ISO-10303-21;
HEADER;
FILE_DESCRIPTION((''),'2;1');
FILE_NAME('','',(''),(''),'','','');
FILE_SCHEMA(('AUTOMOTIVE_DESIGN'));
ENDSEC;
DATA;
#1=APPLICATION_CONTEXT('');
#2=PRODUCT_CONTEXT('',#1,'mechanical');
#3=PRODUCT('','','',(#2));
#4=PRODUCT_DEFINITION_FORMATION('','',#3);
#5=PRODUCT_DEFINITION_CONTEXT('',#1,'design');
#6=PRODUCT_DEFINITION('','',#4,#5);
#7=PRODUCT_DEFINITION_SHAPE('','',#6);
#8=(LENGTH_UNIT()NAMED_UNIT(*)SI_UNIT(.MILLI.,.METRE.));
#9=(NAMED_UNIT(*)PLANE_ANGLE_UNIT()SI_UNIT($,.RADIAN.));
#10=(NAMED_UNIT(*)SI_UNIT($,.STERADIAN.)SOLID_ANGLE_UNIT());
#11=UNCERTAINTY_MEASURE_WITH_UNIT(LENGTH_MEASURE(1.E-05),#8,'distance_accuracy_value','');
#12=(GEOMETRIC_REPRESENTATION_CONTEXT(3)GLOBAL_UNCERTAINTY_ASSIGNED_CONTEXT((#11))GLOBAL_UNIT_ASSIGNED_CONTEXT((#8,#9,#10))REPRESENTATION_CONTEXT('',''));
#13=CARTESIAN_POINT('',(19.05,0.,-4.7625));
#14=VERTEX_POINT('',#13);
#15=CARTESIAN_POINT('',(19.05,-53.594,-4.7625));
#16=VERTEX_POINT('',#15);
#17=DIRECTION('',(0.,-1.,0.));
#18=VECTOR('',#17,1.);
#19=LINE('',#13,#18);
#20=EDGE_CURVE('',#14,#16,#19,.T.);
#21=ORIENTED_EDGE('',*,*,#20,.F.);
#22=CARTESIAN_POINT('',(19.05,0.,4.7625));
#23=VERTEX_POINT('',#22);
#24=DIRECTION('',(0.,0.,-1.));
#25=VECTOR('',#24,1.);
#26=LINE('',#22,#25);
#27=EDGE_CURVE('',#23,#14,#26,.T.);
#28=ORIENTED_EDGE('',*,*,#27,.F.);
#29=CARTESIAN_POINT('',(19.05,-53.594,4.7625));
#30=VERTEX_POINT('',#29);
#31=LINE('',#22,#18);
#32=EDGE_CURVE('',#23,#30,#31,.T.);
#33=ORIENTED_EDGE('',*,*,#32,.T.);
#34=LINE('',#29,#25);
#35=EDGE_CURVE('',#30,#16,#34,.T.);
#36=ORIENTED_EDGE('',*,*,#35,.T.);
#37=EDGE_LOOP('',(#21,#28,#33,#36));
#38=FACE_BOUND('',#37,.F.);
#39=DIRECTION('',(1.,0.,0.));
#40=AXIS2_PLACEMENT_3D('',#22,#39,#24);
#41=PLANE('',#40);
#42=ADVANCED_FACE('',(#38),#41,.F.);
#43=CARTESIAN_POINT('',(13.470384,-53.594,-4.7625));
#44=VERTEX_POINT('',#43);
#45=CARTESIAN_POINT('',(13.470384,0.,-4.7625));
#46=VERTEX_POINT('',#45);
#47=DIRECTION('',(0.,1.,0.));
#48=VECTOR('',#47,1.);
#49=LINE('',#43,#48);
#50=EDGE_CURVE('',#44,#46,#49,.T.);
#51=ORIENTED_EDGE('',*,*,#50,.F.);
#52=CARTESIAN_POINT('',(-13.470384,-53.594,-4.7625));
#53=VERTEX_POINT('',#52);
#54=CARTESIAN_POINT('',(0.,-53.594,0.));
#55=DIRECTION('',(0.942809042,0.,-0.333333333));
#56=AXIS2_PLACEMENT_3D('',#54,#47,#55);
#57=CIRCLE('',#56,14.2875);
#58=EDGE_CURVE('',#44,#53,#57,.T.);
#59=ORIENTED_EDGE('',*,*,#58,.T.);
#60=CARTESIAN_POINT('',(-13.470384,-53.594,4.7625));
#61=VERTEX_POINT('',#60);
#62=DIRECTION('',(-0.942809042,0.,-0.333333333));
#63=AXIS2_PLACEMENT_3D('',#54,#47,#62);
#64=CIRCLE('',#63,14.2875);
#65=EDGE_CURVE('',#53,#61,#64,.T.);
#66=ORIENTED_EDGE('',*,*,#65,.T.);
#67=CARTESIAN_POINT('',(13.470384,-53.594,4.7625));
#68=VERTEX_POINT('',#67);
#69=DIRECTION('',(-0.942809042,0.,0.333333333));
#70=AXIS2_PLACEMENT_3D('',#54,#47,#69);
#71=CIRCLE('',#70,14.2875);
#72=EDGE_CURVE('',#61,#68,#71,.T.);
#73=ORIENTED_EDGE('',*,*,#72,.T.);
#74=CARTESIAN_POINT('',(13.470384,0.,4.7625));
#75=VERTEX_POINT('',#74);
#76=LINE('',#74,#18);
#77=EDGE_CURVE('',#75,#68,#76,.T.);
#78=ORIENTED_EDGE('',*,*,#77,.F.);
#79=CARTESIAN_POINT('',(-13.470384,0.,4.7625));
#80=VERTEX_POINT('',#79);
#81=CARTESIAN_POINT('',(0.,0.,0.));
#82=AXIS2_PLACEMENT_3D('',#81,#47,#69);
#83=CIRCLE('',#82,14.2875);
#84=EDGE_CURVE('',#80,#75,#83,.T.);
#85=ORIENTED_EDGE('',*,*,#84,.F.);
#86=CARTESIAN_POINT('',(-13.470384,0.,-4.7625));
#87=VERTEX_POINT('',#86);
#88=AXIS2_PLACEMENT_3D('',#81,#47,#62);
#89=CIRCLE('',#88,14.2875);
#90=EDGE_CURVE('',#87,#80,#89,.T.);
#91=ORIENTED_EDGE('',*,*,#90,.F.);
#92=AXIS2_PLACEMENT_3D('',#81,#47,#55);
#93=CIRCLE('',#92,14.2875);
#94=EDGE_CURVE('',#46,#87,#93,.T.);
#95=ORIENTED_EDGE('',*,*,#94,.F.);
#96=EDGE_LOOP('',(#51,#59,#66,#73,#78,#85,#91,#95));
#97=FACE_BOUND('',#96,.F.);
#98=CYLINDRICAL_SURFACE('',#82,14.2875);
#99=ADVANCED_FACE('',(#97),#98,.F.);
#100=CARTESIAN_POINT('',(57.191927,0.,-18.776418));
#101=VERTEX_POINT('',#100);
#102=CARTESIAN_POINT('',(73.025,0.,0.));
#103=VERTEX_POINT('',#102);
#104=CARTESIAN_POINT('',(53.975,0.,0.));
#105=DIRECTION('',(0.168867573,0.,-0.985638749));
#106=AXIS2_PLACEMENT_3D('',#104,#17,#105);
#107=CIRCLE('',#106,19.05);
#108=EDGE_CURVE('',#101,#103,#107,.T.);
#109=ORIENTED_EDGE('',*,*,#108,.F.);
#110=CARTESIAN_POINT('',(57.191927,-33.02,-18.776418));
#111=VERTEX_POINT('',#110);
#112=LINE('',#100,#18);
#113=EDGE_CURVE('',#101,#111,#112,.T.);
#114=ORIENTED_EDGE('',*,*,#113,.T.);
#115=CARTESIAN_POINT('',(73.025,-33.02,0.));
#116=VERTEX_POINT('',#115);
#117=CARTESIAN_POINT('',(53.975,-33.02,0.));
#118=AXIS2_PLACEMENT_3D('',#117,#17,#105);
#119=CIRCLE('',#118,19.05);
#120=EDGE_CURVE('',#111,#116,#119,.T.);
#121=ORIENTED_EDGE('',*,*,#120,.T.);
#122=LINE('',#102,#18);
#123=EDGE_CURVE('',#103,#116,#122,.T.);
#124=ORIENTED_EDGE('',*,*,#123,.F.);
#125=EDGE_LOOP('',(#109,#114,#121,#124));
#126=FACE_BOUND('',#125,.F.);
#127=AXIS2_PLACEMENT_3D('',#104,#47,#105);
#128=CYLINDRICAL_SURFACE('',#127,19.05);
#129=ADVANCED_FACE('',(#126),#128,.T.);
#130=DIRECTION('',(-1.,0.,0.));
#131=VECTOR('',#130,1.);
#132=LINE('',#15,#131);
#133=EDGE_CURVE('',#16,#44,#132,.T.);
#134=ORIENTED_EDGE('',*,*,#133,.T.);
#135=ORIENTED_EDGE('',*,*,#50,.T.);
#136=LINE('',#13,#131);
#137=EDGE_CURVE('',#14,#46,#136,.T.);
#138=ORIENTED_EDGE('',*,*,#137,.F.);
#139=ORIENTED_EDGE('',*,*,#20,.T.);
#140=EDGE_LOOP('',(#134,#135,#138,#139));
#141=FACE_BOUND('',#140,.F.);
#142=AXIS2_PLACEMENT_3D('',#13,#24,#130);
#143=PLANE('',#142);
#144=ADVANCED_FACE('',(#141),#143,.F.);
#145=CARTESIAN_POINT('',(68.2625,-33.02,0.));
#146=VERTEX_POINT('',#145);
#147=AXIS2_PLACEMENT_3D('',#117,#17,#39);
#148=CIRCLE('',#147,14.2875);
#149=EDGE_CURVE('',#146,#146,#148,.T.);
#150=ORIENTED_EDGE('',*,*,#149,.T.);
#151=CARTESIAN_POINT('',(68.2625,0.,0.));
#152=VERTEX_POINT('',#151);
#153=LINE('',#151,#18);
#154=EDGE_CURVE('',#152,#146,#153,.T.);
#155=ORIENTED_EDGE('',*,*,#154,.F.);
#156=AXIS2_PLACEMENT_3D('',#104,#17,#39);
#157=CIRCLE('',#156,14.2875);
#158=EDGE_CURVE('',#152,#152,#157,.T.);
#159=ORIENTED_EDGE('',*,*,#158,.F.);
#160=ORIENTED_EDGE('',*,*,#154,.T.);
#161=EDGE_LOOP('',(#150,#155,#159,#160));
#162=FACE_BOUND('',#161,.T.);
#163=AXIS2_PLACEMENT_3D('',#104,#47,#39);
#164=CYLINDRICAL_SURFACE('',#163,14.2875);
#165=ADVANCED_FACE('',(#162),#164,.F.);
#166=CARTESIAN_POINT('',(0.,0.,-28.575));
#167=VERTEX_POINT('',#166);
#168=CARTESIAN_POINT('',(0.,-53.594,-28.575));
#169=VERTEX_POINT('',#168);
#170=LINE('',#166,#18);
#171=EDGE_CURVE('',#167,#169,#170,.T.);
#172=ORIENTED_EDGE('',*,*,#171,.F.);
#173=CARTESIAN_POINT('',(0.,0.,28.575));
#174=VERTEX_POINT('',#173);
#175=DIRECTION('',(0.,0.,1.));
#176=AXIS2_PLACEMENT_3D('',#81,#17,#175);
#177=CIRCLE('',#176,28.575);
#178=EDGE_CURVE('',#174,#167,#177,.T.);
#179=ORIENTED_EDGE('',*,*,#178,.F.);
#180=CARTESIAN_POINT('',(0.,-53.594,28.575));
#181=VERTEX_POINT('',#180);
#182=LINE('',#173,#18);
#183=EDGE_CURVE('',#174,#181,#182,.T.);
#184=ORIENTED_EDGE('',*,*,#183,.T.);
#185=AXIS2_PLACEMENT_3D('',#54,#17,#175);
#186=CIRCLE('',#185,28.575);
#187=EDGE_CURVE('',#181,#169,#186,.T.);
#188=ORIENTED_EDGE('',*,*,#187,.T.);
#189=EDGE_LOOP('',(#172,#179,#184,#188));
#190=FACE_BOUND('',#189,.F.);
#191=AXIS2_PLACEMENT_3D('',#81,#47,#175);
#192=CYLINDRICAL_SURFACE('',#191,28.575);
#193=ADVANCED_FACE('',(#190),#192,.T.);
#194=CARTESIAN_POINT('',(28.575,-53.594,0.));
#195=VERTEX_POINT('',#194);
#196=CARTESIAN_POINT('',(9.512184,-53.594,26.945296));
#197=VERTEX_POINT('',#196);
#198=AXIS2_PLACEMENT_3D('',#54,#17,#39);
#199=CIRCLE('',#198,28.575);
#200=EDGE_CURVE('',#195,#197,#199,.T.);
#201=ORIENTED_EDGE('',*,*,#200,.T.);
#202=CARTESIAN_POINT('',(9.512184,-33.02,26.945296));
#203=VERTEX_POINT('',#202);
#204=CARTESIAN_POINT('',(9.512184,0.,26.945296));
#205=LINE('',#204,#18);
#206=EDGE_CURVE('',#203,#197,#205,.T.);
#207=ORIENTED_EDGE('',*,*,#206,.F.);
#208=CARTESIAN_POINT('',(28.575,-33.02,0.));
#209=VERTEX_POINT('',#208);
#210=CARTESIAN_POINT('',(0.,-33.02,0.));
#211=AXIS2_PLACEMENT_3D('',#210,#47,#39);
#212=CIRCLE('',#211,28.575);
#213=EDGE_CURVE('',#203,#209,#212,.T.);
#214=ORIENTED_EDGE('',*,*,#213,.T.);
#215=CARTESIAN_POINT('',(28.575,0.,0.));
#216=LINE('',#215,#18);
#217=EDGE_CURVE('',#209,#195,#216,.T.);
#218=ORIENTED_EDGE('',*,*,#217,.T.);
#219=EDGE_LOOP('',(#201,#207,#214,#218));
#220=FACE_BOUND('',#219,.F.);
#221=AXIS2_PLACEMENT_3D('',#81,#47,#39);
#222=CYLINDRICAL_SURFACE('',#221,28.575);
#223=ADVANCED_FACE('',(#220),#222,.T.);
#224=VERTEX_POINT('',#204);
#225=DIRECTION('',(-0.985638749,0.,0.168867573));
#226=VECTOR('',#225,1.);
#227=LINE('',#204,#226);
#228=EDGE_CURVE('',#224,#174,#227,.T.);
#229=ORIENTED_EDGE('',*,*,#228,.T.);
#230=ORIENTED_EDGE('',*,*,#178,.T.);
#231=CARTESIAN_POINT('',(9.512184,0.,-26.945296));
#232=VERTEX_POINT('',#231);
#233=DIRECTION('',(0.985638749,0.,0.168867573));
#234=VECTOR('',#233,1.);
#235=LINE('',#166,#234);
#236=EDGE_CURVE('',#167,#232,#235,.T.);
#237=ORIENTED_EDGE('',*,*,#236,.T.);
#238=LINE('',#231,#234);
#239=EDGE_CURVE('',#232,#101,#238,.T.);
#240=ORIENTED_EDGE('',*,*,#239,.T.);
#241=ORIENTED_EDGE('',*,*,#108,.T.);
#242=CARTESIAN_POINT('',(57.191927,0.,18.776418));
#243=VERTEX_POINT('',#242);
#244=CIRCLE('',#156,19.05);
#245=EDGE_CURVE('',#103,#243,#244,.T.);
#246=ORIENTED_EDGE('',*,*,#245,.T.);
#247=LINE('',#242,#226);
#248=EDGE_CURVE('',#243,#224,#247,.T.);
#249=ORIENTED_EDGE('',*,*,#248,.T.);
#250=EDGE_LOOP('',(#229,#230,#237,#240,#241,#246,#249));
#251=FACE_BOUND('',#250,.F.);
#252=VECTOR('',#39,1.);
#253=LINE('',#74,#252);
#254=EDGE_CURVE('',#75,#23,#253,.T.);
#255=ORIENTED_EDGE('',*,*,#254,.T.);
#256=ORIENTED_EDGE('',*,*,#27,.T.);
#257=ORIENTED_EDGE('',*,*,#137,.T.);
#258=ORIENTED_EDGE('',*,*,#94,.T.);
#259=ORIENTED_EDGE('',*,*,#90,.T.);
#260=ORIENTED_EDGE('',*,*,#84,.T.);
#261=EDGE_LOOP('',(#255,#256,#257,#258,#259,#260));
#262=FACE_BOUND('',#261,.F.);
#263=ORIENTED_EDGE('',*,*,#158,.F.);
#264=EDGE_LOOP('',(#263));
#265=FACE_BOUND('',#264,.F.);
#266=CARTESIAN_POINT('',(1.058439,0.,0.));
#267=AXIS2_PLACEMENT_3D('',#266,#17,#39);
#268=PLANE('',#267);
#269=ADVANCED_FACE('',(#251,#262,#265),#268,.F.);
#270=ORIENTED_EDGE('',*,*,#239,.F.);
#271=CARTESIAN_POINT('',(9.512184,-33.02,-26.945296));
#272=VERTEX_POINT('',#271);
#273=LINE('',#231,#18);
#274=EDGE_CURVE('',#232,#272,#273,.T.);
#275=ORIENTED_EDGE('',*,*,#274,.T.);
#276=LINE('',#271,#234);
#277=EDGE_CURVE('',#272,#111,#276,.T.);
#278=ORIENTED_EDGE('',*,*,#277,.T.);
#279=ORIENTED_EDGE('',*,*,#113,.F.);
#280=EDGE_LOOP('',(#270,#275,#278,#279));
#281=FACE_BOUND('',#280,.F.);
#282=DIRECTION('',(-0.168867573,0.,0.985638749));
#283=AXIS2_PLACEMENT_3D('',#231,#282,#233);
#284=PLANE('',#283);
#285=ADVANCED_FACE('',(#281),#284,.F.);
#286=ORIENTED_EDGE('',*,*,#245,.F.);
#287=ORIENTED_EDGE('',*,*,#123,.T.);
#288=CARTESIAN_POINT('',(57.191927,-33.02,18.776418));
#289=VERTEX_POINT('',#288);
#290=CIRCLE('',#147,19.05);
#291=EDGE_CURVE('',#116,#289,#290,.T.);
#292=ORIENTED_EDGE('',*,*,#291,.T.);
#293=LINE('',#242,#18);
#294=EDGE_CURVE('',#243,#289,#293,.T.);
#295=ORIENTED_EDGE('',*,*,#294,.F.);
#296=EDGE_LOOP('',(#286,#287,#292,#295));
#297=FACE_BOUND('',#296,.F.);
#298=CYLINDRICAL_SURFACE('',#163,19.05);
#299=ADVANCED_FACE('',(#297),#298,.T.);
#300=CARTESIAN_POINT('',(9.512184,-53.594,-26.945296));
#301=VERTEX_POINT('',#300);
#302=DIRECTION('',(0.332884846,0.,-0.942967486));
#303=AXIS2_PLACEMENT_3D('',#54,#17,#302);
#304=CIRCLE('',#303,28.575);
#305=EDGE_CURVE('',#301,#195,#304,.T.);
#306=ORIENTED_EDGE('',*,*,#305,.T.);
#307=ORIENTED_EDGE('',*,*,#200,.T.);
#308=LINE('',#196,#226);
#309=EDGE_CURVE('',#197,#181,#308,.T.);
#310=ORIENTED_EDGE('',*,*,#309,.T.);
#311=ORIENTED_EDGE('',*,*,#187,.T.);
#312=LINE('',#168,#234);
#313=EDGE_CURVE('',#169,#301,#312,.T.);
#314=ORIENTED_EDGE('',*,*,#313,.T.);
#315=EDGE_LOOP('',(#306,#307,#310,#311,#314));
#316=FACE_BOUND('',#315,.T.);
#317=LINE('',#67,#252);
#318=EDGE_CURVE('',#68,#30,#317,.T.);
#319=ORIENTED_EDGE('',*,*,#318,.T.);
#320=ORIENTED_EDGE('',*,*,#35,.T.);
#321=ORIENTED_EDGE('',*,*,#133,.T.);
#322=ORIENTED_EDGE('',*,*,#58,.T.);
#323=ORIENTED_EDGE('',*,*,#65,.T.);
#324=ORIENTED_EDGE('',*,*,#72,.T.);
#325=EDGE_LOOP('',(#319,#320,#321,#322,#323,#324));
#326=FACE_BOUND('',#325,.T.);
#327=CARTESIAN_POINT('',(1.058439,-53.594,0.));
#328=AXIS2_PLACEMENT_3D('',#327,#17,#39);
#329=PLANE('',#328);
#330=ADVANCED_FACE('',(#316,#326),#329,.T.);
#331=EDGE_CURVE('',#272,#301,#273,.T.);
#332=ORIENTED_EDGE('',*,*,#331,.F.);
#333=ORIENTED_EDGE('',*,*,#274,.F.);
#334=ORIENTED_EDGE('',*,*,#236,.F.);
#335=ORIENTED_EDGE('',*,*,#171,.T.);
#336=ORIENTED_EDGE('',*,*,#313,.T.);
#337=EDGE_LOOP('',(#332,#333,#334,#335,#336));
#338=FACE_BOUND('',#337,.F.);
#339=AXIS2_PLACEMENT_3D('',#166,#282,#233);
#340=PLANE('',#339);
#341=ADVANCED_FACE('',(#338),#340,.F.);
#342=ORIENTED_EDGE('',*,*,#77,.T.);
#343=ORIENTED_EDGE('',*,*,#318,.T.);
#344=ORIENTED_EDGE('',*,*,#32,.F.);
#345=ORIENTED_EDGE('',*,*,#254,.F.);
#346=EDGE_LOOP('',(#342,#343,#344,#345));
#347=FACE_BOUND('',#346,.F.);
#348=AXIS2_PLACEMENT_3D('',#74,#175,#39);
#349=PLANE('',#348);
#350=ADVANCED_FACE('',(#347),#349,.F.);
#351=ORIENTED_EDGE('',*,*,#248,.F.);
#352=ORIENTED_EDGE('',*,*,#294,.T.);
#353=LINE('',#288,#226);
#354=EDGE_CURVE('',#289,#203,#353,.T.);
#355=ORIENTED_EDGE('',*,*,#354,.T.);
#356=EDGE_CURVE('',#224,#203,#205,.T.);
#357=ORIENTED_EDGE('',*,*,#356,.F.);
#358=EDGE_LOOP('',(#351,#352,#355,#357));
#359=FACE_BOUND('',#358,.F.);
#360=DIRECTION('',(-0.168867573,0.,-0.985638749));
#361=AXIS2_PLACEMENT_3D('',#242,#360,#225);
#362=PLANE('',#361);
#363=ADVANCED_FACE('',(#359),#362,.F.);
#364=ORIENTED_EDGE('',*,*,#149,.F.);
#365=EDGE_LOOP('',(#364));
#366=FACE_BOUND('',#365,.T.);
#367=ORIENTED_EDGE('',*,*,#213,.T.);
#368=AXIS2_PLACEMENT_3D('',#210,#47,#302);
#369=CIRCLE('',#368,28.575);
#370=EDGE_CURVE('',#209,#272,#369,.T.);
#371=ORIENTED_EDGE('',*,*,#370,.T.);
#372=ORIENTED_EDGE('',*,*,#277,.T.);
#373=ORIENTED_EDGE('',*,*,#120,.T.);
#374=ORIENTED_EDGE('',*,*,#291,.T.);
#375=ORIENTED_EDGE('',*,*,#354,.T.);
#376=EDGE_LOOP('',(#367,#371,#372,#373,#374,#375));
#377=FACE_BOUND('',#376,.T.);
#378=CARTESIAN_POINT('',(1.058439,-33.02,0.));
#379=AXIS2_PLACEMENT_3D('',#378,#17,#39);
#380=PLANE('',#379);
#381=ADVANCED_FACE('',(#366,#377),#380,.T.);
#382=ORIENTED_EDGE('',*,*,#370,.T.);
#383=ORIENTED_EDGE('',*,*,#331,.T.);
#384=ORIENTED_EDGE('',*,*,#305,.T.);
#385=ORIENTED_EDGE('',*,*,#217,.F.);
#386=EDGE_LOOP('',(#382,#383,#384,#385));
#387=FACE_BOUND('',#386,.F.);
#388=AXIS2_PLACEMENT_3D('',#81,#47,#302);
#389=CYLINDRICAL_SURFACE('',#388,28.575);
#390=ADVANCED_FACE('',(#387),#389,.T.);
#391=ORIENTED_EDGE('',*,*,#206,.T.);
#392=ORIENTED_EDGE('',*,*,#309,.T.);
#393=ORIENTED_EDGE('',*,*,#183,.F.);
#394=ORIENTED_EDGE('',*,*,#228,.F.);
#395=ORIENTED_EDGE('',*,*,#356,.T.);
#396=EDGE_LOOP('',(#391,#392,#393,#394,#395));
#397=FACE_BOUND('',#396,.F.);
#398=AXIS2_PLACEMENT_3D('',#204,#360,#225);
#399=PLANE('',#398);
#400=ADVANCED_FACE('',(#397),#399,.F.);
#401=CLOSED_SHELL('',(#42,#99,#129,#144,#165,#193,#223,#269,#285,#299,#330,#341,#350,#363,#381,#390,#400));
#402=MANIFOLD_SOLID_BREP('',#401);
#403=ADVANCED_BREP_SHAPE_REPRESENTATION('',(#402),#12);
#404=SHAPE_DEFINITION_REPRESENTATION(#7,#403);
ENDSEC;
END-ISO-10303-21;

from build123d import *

# Parameters (mm, degrees)
F0_R     = 14.2875
F1_DEPTH = 33.02
F2_DEPTH = 53.594


with BuildPart() as f1:
    # F0 (on Front) → F1 (new body)
    with BuildSketch(Plane.XZ):
        with BuildLine():
            Line((9.5121844836, 26.9452959039), (0, 28.575))
            ThreePointArc((0, 28.575), (-28.575, 0), (0, -28.575))
            Line((0, -28.575), (9.5121844836, -26.9452959039))
            ThreePointArc((9.5121844836, -26.9452959039), (23.3274655355, -16.5033322905), (28.575, 0))
            ThreePointArc((28.575, 0), (23.3274655355, 16.5033322905), (9.5121844836, 26.9452959039))
        make_face()
        with BuildLine():
            ThreePointArc((-13.4703841816, 4.7625), (0, 14.2875), (13.4703841816, 4.7625))
            Line((13.4703841816, 4.7625), (19.05, 4.7625))
            Line((19.05, 4.7625), (19.05, -4.7625))
            Line((19.05, -4.7625), (13.4703841816, -4.7625))
            ThreePointArc((13.4703841816, -4.7625), (0, -14.2875), (-13.4703841816, -4.7625))
            Line((-13.4703841816, -4.7625), (-19.05, -4.7625))
            Line((-19.05, -4.7625), (-19.05, 4.7625))
            Line((-19.05, 4.7625), (-13.4703841816, 4.7625))
        make_face(mode=Mode.SUBTRACT)
        with BuildLine():
            Line((57.1919272622, 18.7764181619), (9.5121844836, 26.9452959039))
            ThreePointArc((9.5121844836, 26.9452959039), (23.3274655355, 16.5033322905), (28.575, 0))
            ThreePointArc((28.575, 0), (23.3274655355, -16.5033322905), (9.5121844836, -26.9452959039))
            Line((9.5121844836, -26.9452959039), (57.1919272622, -18.7764181619))
            ThreePointArc((57.1919272622, -18.7764181619), (34.925, 0), (57.1919272622, 18.7764181619))
        make_face()
        with BuildLine():
            ThreePointArc((73.025, 0), (68.5383952831, 12.2804730295), (57.1919272622, 18.7764181619))
            ThreePointArc((57.1919272622, 18.7764181619), (34.925, 0), (57.1919272622, -18.7764181619))
            ThreePointArc((57.1919272622, -18.7764181619), (68.5383952831, -12.2804730295), (73.025, 0))
        make_face()
        with Locations((53.975, 0)):
            Circle(F0_R, mode=Mode.SUBTRACT)
        with BuildLine():
            ThreePointArc((-13.4703841816, -4.7625), (-14.2875, 0), (-13.4703841816, 4.7625))
            Line((-13.4703841816, 4.7625), (-19.05, 4.7625))
            Line((-19.05, 4.7625), (-19.05, -4.7625))
            Line((-19.05, -4.7625), (-13.4703841816, -4.7625))
        make_face()
    extrude(amount=F1_DEPTH)

    # F0 (on Front) → F2 (join)
    with BuildSketch(Plane.XZ):
        with BuildLine():
            Line((9.5121844836, 26.9452959039), (0, 28.575))
            ThreePointArc((0, 28.575), (-28.575, 0), (0, -28.575))
            Line((0, -28.575), (9.5121844836, -26.9452959039))
            ThreePointArc((9.5121844836, -26.9452959039), (23.3274655355, -16.5033322905), (28.575, 0))
            ThreePointArc((28.575, 0), (23.3274655355, 16.5033322905), (9.5121844836, 26.9452959039))
        make_face()
        with BuildLine():
            ThreePointArc((-13.4703841816, 4.7625), (0, 14.2875), (13.4703841816, 4.7625))
            Line((13.4703841816, 4.7625), (19.05, 4.7625))
            Line((19.05, 4.7625), (19.05, -4.7625))
            Line((19.05, -4.7625), (13.4703841816, -4.7625))
            ThreePointArc((13.4703841816, -4.7625), (0, -14.2875), (-13.4703841816, -4.7625))
            Line((-13.4703841816, -4.7625), (-19.05, -4.7625))
            Line((-19.05, -4.7625), (-19.05, 4.7625))
            Line((-19.05, 4.7625), (-13.4703841816, 4.7625))
        make_face(mode=Mode.SUBTRACT)
        with BuildLine():
            ThreePointArc((-13.4703841816, -4.7625), (-14.2875, 0), (-13.4703841816, 4.7625))
            Line((-13.4703841816, 4.7625), (-19.05, 4.7625))
            Line((-19.05, 4.7625), (-19.05, -4.7625))
            Line((-19.05, -4.7625), (-13.4703841816, -4.7625))
        make_face()
    extrude(amount=F2_DEPTH)


solid = f1.part
